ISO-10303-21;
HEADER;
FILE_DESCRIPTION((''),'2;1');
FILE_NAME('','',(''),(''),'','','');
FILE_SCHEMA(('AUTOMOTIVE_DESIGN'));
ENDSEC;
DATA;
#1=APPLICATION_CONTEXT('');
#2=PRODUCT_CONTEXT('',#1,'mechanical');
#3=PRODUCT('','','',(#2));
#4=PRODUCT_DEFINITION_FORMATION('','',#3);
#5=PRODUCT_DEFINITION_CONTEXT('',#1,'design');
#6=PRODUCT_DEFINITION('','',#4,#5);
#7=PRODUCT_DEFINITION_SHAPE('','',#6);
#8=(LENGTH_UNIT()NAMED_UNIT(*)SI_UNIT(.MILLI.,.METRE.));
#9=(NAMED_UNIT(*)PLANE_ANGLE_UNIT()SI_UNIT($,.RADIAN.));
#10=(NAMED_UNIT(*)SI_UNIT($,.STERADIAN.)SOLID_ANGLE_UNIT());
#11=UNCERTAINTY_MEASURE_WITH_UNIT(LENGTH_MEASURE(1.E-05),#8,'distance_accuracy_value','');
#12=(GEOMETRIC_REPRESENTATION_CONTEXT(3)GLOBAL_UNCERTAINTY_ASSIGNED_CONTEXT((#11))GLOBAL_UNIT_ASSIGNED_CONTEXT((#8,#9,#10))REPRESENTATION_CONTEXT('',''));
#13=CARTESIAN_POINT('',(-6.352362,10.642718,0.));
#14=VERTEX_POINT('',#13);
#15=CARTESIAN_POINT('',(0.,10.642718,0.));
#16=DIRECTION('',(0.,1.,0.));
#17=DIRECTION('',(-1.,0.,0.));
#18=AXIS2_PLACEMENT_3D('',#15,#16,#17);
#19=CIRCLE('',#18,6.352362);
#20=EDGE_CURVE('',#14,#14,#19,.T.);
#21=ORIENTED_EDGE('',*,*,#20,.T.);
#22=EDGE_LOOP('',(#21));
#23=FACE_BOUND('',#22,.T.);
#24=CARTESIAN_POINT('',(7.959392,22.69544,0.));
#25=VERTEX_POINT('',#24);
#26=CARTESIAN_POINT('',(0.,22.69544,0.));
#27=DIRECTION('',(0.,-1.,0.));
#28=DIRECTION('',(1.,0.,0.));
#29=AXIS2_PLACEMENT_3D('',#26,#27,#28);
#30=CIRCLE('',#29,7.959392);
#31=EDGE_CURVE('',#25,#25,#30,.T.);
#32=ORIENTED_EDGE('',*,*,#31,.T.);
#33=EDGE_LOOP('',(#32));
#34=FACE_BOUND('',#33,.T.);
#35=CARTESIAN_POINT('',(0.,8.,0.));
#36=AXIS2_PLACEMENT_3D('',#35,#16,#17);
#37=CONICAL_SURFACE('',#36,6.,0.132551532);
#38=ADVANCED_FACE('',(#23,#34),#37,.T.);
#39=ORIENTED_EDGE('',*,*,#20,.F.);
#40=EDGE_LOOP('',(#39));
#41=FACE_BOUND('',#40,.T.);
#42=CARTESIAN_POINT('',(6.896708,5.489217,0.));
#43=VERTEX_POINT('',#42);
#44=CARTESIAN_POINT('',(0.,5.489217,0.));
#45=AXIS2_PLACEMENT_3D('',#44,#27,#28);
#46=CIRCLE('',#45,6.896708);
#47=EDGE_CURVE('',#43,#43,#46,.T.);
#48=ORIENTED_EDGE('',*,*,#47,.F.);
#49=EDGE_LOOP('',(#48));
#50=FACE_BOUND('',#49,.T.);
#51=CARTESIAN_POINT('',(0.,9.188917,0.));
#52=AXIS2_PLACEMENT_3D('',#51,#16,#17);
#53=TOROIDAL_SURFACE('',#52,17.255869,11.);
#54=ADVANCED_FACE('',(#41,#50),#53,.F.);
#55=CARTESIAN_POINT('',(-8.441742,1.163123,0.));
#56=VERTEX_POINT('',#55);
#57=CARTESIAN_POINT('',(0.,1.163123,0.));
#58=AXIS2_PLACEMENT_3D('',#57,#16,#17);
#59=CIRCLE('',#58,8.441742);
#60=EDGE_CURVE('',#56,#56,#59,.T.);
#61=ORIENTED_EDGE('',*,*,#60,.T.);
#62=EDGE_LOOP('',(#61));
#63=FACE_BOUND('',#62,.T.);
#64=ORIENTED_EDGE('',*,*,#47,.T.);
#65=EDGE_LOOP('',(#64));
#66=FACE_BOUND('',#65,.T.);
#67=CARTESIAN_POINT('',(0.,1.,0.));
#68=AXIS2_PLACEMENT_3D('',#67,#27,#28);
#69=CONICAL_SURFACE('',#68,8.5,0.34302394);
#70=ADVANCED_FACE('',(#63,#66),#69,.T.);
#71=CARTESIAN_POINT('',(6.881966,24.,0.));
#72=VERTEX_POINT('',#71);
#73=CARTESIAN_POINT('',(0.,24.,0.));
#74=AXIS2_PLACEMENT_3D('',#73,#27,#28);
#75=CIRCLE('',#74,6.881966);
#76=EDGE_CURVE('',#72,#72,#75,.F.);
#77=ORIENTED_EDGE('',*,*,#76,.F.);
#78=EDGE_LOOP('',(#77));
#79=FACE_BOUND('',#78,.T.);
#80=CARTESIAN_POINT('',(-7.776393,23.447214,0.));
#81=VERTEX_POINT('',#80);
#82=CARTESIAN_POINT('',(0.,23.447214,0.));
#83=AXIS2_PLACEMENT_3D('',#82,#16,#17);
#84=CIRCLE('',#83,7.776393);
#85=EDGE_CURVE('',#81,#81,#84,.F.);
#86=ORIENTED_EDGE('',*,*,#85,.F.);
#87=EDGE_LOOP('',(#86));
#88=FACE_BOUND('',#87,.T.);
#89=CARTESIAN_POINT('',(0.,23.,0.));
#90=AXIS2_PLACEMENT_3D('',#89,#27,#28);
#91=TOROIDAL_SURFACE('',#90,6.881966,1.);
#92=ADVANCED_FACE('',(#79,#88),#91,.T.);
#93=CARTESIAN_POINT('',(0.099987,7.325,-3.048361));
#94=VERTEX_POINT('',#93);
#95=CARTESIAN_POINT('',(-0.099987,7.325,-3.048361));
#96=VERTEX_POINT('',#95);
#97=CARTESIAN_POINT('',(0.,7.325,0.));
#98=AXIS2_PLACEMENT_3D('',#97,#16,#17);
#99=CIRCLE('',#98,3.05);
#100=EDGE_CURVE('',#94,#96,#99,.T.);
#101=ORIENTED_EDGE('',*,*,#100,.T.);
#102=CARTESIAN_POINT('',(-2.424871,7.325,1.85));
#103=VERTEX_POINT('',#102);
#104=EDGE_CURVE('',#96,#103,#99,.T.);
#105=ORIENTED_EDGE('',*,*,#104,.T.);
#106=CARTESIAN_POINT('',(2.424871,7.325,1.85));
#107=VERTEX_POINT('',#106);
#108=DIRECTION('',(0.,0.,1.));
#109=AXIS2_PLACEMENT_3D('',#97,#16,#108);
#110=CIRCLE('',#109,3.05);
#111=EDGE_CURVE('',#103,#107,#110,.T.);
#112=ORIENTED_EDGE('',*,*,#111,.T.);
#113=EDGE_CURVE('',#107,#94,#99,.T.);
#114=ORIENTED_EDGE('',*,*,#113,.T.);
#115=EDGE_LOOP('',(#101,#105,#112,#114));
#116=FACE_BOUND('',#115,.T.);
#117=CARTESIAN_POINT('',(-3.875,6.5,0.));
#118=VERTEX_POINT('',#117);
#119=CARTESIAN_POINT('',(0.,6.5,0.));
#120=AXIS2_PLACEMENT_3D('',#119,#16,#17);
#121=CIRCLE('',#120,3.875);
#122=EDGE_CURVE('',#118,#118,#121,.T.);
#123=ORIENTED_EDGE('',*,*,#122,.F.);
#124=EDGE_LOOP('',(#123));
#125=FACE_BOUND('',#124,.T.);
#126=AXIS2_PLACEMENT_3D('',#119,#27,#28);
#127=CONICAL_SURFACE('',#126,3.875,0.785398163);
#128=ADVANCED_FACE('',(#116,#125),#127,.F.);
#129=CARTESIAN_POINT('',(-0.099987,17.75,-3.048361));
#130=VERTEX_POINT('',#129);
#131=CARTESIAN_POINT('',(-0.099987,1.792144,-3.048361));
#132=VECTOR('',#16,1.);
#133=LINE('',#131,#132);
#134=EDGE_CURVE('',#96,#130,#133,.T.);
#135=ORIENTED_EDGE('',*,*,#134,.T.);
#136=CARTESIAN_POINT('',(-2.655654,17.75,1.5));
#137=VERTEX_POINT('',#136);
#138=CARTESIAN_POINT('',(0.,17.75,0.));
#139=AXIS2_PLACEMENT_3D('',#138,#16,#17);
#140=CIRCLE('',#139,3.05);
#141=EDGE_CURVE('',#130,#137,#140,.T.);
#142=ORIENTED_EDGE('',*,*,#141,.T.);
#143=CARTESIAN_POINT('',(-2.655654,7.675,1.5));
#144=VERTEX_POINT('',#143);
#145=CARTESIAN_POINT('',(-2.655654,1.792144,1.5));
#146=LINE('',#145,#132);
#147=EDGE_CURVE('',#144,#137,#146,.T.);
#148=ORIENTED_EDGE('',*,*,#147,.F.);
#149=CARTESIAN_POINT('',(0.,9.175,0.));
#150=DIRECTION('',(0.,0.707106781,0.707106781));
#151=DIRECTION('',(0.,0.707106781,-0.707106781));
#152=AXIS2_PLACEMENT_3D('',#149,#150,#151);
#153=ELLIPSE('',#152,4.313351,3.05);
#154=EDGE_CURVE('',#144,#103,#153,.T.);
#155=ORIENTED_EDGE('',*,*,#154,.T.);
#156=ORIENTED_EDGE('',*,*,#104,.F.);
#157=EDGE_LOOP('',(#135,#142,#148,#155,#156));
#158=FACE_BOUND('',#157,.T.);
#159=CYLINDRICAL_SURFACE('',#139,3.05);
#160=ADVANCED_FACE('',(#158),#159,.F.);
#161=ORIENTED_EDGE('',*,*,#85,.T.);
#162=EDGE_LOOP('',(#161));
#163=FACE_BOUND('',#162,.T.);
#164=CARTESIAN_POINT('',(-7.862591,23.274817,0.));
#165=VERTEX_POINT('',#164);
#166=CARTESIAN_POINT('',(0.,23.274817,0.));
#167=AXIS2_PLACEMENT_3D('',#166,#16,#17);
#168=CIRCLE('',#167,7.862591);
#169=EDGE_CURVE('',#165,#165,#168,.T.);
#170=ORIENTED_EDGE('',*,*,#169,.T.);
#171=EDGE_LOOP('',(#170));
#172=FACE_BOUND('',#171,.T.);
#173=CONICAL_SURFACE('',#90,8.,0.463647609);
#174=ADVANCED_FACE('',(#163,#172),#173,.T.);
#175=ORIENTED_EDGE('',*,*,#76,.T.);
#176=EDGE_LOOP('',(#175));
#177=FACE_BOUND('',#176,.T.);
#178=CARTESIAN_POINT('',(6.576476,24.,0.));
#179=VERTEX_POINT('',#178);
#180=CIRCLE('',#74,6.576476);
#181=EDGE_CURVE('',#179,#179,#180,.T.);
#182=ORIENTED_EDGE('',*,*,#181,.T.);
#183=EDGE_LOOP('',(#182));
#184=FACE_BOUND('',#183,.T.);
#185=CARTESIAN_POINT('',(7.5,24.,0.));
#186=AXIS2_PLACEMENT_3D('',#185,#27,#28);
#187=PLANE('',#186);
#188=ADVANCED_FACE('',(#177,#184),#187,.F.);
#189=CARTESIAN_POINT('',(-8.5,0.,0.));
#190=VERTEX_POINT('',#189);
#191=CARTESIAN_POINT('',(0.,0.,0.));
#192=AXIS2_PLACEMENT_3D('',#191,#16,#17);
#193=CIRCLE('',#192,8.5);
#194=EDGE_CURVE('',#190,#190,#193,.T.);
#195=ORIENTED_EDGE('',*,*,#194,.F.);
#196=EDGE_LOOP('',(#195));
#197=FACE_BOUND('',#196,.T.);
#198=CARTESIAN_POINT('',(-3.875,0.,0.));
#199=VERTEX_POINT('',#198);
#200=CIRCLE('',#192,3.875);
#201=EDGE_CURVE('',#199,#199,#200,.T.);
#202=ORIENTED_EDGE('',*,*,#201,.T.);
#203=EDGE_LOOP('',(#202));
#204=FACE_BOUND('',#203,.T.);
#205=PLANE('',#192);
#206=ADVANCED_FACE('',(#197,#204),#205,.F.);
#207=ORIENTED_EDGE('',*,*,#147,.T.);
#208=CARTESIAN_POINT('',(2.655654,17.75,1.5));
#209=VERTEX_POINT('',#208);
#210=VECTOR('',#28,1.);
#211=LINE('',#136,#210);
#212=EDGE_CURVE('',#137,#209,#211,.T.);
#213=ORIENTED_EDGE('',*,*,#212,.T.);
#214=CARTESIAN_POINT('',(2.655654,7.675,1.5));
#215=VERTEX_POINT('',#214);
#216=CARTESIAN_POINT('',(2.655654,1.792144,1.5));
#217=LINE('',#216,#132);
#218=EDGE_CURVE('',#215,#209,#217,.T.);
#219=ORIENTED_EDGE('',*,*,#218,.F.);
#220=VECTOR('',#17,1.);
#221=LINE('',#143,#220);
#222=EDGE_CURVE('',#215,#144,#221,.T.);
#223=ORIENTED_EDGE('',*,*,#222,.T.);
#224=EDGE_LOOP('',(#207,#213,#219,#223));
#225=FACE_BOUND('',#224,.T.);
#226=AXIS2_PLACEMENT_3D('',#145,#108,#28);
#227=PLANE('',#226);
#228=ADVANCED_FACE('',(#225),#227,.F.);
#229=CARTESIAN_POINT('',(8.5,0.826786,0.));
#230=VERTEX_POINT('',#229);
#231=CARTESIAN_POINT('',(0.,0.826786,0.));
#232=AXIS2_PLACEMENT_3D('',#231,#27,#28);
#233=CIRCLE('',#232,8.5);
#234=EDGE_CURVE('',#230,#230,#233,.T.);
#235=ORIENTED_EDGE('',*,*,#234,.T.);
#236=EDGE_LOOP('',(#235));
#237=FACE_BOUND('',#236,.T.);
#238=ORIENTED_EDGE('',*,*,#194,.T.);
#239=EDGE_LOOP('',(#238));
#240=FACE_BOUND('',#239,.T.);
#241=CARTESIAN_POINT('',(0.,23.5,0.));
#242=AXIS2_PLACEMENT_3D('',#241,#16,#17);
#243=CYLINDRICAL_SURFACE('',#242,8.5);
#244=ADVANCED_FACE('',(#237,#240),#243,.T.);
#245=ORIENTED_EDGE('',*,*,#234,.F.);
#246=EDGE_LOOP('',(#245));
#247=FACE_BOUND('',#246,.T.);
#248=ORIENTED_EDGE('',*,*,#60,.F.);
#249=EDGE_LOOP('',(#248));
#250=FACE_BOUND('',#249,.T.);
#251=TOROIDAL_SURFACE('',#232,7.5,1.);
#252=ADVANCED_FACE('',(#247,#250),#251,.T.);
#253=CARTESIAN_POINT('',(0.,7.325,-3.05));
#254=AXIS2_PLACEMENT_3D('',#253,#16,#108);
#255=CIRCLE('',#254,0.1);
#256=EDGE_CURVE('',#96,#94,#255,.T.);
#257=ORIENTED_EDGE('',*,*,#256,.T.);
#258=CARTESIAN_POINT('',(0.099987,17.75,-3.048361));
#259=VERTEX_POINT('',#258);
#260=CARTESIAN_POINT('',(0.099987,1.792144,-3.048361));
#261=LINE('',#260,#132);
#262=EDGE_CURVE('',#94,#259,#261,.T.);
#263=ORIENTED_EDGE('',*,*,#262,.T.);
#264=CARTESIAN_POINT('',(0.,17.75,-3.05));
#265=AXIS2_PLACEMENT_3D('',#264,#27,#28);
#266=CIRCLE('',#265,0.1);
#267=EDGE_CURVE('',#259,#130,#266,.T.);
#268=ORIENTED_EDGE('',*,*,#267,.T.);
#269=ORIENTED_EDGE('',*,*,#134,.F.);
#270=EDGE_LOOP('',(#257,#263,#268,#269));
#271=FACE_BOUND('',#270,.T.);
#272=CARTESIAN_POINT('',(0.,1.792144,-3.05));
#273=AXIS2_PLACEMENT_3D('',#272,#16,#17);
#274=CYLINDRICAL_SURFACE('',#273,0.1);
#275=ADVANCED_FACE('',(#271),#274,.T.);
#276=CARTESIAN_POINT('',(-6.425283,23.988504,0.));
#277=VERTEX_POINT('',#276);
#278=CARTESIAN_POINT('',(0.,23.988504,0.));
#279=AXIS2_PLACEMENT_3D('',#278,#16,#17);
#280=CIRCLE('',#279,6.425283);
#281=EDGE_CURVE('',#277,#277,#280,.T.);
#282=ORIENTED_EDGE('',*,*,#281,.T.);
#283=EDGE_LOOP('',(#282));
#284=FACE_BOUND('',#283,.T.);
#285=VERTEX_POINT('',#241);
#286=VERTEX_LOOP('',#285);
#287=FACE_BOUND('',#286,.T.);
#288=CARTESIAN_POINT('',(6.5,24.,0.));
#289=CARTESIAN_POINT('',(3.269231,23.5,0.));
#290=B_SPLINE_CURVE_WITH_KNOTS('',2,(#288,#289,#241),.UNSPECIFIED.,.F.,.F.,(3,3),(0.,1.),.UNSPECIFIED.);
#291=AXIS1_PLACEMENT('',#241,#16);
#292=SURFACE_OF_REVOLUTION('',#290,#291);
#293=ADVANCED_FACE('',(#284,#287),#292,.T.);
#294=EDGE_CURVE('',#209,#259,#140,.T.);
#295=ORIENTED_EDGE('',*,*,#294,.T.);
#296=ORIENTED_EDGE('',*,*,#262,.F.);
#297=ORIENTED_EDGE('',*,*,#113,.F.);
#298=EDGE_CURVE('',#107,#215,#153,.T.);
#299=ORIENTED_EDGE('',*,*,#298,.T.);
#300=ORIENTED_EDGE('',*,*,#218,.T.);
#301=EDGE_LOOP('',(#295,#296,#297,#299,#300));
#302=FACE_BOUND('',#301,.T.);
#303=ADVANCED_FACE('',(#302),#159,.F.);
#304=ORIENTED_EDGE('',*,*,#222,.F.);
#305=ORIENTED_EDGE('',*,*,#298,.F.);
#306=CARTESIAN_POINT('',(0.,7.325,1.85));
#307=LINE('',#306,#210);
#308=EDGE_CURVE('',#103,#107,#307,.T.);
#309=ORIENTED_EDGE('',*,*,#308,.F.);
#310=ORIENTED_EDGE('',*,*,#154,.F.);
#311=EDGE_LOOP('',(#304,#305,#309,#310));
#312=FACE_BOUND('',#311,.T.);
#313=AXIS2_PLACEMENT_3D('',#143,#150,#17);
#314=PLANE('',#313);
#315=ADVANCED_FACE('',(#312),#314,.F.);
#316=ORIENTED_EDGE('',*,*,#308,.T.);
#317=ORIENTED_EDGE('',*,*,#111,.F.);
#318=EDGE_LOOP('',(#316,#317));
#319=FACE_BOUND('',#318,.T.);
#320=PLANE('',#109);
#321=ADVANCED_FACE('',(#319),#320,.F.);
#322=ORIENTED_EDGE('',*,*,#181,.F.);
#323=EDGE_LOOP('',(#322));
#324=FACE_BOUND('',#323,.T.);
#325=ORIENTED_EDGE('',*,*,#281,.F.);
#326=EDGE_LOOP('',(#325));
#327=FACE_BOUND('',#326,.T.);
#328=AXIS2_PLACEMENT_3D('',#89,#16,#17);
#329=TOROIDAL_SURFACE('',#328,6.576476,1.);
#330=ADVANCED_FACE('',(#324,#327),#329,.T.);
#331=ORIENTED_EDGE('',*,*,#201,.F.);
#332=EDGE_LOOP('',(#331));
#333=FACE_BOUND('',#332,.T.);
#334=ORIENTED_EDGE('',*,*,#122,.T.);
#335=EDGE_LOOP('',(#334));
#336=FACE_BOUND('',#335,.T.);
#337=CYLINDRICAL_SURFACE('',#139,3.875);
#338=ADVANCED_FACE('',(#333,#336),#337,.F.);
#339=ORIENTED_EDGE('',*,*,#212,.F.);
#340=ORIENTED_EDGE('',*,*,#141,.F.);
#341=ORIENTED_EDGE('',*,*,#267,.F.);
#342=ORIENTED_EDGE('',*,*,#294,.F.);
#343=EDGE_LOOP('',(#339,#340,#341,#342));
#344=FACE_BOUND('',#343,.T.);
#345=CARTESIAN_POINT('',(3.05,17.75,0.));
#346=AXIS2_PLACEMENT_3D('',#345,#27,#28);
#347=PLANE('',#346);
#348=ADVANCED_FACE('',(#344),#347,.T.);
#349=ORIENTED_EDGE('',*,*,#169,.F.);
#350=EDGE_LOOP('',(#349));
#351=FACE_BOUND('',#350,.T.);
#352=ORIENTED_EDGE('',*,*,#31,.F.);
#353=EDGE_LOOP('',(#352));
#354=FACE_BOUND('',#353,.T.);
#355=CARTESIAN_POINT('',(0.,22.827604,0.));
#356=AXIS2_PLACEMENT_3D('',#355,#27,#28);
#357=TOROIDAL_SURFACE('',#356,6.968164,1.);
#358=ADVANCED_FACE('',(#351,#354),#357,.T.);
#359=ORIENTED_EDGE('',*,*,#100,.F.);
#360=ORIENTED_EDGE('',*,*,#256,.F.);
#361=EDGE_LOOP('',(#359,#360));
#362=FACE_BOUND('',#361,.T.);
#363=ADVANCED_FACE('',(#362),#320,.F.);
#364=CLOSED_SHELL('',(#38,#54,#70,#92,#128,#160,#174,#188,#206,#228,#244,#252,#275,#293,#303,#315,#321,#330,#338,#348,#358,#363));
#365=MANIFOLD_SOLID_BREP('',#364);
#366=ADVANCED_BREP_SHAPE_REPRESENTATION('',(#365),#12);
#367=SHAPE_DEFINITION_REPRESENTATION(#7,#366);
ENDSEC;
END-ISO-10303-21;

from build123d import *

# Parameters (mm, degrees)
FILLET1_R           = 11
FILLET2_R           = 1
BOSS_EXTRUDE1_DEPTH = 10.425
CHAMFER1_SIZE       = 0.35


with BuildPart() as part:
    # Sketch1 → Revolve1 (revolve)
    with BuildSketch(Plane.XY, mode=Mode.PRIVATE) as revolve1_sk:
        with BuildLine():
            Line((0, 0), (8.5, 0))
            Line((8.5, 0), (8.5, 1))
            Line((8.5, 1), (6, 8))
            Line((6, 8), (8, 23))
            Line((8, 23), (7.5, 24))
            Line((7.5, 24), (6.5, 24))
            add(Edge.make_bspline(
                [(6.5, 24), (3.269230769, 23.5), (0, 23.5)],
                knots=[0, 0, 0, 1, 1, 1], degree=2))
            Line((0, 23.5), (0, 0))
        make_face()
    revolve(revolve1_sk.sketch.rotate(Axis((0, 23.5, 0), (0, -1, 0)), 180), axis=Axis((0, 23.5, 0), (0, -1, 0)))

    # Fillet1
    fillet1_edges = [part.edges().sort_by_distance(p)[0] for p in [
        (6, 8, 0),
    ]]
    fillet(fillet1_edges, radius=FILLET1_R)

    # Fillet2
    fillet2_edges = [part.edges().sort_by_distance(p)[0] for p in [
        (6.5, 24, 0),
        (7.5, 24, 0),
        (8, 23, 0),
        (8.5, 1, 0),
    ]]
    fillet(fillet2_edges, radius=FILLET2_R)

    # Sketch3 → Cut-Revolve1 (revolve, cut)
    with BuildSketch(Plane.XY, mode=Mode.PRIVATE) as cut_revolve1_sk:
        Polygon((0, 0), (3.875, 0), (3.875, 6.5), (3.05, 7.325), (3.05, 17.75), (0, 17.75), align=None)
    revolve(cut_revolve1_sk.sketch.rotate(Axis((0, 17.75, 0), (0, -1, 0)), 180), axis=Axis((0, 17.75, 0), (0, -1, 0)), mode=Mode.SUBTRACT)

    # Sketch4 → Boss-Extrude1 (add)
    with BuildSketch(Plane.XZ.offset(-17.75)):
        with BuildLine():
            Line((-2.655654345, 1.5), (2.655654345, 1.5))
            ThreePointArc((2.655654345, 1.5), (0, 3.05), (-2.655654345, 1.5))
        make_face()
        with BuildLine():
            ThreePointArc((-0.099986562, -3.048360656), (0, -3.05), (0.099986562, -3.048360656))
            ThreePointArc((0.099986562, -3.048360656), (0, -2.95), (-0.099986562, -3.048360656))
        make_face()
    extrude(amount=BOSS_EXTRUDE1_DEPTH)

    # Chamfer1
    # the kernel refuses this chamfer: 0.35 mm, written as the material it takes off along each edge
    with BuildSketch(Plane(origin=(-3.555743391, 7.325, 1.5), x_dir=(0, -0.02749587661058614, 0.9996219169112968), z_dir=(1, 0, 0))) as chamfer1_piece_1_section:
        Polygon((CHAMFER1_SIZE * 0.999621916911, -CHAMFER1_SIZE * 0.0274958766106), (-CHAMFER1_SIZE * 0.0274958766106, -CHAMFER1_SIZE * 0.999621916911), (0, 0), align=None)
    chamfer1_piece_1 = extrude(amount=7.111486782, mode=Mode.PRIVATE)
    chamfer1_piece_1 = chamfer1_piece_1 & Plane(origin=(0, 7.499624527, 0), x_dir=(-1, 0, 0), z_dir=(0, 1, 0)) * Cylinder(3.05, 16, mode=Mode.PRIVATE)
    add(chamfer1_piece_1, mode=Mode.SUBTRACT)


solid = part.part
